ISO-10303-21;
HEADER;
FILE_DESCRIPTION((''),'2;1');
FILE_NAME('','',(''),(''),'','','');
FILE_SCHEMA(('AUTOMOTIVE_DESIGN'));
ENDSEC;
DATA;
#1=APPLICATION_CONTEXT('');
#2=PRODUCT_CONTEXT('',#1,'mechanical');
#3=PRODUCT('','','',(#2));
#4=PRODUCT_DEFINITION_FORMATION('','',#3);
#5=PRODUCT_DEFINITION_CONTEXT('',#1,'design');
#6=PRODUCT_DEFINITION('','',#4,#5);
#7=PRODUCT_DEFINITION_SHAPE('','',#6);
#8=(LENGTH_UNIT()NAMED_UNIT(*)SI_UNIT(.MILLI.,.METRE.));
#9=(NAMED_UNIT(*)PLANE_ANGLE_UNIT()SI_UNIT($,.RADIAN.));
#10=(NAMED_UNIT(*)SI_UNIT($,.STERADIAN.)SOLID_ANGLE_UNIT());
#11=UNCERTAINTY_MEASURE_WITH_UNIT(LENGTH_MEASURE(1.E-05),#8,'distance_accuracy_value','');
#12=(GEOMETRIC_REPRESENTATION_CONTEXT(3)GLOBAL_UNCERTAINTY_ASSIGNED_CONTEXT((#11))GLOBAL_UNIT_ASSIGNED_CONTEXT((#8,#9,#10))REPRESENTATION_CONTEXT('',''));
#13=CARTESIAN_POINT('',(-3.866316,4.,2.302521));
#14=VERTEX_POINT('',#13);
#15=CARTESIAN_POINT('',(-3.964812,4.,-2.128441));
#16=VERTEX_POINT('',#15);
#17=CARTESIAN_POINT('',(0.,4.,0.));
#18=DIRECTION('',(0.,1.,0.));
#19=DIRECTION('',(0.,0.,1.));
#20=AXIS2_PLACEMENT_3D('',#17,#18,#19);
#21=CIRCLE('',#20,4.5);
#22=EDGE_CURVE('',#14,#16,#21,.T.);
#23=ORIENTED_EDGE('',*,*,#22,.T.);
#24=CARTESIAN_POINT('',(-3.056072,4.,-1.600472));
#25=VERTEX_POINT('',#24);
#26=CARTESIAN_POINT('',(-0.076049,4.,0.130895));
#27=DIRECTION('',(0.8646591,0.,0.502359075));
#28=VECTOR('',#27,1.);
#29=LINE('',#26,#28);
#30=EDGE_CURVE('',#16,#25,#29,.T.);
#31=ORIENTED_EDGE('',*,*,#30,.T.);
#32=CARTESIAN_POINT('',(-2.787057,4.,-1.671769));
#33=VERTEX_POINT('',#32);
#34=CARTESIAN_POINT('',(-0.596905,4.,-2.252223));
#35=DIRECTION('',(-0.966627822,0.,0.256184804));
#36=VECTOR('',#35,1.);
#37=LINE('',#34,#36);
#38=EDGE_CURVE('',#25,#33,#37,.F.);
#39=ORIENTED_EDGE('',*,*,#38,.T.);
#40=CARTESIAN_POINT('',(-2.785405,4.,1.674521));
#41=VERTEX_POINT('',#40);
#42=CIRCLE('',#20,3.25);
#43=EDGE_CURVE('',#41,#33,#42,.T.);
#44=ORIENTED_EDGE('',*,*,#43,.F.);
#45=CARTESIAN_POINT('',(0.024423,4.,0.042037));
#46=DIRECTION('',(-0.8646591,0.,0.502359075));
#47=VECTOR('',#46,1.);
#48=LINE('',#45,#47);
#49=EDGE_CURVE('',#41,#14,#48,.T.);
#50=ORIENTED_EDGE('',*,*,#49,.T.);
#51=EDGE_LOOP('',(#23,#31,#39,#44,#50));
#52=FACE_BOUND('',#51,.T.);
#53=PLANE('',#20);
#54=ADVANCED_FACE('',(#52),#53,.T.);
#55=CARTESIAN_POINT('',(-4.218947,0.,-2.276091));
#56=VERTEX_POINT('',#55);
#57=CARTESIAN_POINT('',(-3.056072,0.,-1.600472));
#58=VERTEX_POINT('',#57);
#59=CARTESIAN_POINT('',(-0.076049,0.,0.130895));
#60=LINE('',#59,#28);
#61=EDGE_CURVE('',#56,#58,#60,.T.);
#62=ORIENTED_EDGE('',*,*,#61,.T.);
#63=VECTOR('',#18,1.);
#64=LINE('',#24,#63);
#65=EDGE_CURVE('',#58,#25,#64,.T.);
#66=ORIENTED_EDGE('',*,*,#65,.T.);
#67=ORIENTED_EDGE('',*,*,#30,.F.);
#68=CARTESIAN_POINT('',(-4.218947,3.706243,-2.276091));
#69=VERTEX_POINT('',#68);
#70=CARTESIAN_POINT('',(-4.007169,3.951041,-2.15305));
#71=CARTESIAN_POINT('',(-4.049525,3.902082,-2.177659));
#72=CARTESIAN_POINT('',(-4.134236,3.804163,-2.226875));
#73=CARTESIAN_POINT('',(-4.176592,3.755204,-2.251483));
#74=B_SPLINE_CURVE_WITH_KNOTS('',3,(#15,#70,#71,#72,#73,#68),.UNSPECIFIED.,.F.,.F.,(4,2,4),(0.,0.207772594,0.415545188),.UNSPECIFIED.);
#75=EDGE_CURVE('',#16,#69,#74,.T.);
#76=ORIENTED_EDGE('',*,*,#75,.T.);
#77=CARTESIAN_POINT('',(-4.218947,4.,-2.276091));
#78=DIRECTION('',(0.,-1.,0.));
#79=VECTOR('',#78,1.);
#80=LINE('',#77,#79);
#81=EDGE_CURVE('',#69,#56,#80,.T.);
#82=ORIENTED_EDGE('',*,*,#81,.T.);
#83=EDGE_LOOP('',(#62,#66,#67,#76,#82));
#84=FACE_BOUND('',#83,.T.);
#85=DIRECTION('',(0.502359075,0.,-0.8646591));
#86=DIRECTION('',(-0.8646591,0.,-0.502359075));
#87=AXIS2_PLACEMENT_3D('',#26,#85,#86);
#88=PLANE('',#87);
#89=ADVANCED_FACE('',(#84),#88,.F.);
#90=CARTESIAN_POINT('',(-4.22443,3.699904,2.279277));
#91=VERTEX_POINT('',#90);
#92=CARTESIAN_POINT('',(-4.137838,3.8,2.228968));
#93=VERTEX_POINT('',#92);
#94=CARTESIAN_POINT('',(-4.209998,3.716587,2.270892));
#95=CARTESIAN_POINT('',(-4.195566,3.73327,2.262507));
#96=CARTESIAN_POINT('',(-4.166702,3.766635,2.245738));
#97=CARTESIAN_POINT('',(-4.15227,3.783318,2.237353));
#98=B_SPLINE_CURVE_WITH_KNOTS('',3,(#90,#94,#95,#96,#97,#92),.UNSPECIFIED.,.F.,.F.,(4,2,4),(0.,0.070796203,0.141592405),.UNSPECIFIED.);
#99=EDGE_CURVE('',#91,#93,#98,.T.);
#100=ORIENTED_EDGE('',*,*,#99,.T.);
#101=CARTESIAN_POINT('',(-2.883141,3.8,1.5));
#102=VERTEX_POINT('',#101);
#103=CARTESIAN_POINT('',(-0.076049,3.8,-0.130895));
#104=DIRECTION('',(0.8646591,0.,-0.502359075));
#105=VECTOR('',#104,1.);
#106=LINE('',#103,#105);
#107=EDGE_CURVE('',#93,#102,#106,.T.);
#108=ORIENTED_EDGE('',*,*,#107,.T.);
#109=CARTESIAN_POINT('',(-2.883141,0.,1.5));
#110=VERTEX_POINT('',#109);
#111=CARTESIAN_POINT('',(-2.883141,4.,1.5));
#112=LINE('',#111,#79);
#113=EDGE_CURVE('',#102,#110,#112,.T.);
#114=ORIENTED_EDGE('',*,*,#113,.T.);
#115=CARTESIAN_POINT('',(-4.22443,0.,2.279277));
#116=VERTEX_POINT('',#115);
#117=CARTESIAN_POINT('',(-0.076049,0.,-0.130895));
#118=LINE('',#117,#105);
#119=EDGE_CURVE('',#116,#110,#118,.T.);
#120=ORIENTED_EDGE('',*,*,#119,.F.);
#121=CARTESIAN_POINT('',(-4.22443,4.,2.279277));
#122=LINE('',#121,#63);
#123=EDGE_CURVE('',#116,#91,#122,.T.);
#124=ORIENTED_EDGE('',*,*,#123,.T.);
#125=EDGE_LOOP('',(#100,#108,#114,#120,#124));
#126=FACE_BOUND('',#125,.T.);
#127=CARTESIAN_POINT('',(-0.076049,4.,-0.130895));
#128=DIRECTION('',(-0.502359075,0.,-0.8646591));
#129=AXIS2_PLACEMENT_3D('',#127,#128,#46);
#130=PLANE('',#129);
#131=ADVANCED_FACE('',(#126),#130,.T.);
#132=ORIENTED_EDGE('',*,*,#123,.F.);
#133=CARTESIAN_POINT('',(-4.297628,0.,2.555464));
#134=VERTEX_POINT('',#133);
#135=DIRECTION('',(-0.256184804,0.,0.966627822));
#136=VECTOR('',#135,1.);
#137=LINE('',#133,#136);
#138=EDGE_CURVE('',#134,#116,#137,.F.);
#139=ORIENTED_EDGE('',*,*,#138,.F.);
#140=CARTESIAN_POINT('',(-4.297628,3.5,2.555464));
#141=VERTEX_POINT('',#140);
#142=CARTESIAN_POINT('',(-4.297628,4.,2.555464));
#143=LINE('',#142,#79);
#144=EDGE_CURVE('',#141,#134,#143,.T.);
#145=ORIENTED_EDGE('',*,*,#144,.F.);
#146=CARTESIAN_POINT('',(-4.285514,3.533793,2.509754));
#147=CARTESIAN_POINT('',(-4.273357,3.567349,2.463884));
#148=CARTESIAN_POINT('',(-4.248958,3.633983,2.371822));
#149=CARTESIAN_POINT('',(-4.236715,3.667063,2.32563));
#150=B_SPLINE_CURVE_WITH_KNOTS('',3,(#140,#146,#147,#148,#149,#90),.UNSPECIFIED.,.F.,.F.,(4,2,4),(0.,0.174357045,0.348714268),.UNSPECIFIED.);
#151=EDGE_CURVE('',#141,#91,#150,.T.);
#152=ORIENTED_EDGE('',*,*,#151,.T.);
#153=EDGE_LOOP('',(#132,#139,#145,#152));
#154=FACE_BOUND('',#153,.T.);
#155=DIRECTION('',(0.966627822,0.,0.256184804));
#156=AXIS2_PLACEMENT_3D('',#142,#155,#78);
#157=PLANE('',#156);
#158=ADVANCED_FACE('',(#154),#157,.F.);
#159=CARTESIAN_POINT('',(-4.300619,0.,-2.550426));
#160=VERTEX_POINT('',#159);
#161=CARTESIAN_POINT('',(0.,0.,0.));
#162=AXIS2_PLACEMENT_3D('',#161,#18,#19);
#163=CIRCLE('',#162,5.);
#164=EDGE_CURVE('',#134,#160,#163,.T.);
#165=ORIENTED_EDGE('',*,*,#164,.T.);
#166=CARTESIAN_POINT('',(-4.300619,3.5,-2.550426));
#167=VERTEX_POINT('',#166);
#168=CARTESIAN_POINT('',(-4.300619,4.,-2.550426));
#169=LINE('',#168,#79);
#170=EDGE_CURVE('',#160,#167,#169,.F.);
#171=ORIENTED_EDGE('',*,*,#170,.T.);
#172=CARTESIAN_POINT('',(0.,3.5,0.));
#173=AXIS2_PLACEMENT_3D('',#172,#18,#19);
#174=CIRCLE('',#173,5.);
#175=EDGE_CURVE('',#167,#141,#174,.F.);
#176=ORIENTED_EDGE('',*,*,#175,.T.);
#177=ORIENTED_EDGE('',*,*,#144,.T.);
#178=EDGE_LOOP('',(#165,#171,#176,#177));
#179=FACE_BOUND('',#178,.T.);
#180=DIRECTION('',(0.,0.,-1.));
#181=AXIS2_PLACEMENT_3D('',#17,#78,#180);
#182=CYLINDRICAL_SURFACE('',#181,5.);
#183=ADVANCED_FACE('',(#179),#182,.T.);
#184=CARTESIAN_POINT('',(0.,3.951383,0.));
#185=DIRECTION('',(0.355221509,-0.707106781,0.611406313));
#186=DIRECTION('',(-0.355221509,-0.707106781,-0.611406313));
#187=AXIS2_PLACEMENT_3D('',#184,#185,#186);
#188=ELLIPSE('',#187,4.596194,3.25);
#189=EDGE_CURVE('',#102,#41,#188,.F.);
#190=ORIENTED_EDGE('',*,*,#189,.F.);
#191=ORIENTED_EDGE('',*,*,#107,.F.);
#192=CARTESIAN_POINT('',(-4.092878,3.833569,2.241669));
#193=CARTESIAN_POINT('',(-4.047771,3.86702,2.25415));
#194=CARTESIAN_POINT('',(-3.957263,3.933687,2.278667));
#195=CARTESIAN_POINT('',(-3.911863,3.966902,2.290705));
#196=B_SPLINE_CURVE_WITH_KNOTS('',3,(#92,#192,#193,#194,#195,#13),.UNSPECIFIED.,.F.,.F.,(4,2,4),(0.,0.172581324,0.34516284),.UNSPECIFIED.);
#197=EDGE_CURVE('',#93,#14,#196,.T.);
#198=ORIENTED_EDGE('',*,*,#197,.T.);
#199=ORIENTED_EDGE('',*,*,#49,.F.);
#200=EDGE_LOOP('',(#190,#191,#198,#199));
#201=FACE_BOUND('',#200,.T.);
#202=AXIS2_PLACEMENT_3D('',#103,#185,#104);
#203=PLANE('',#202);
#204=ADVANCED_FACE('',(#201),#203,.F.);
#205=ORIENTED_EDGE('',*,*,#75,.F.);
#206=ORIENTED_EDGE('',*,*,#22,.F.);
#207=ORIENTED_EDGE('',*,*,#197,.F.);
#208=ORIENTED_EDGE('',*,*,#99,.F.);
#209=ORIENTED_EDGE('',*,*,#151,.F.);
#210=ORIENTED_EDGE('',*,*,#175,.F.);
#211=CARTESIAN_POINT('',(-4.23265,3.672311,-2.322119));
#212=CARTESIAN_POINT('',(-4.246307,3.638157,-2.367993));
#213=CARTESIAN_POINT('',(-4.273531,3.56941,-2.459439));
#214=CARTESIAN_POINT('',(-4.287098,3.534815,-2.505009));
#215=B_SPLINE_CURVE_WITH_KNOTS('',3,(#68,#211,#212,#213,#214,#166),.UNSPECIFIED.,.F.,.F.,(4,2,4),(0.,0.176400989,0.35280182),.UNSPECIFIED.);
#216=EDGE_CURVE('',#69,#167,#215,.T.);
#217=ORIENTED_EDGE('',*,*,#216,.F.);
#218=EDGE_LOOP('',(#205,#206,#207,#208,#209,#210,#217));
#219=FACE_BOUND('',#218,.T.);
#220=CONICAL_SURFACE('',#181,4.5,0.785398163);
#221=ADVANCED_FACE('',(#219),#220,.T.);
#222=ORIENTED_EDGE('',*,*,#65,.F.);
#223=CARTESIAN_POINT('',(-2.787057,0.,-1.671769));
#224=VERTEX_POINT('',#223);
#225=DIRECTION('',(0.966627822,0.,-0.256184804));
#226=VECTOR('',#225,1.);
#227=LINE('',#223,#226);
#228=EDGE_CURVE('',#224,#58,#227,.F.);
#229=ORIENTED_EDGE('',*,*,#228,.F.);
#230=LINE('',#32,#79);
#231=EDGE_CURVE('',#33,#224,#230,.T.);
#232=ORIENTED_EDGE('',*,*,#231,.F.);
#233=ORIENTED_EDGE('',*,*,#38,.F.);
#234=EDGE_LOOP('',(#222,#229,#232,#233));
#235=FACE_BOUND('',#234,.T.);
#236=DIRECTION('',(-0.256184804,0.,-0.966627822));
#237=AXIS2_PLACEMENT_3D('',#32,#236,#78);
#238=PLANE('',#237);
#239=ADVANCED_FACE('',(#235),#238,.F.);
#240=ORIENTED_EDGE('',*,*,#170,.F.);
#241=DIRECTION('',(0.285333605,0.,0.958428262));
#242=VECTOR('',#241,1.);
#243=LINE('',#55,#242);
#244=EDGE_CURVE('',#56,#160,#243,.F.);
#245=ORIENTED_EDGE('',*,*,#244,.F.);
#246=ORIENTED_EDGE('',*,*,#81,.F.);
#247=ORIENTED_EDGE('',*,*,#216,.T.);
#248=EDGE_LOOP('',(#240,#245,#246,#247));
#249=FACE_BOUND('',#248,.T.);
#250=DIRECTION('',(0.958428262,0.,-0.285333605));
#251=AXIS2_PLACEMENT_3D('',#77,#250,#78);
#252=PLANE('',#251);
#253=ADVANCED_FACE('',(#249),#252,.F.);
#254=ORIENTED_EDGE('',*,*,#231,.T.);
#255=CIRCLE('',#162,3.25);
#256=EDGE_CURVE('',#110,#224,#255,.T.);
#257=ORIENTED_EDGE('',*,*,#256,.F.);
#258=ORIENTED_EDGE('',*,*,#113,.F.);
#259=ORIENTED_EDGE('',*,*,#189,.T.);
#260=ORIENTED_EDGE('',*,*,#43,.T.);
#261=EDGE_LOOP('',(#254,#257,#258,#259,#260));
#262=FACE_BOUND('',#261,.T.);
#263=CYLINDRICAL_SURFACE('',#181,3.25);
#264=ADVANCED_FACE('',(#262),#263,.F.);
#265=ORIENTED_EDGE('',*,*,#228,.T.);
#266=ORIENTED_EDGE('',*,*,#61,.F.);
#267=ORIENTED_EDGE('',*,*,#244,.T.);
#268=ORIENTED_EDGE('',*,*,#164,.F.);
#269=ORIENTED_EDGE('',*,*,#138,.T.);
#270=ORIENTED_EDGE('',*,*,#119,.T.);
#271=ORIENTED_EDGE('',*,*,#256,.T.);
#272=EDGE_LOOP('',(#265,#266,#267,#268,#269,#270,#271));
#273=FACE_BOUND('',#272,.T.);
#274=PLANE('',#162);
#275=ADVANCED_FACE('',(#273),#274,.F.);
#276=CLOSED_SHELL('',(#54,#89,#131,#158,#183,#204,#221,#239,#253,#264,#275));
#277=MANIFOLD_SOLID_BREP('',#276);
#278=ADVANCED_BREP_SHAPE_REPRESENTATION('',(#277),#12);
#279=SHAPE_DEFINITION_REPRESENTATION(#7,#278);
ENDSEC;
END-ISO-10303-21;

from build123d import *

# Parameters (mm, degrees)
BOSS_EXTRUDE1_DEPTH = 4
CHAMFER1_SIZE       = 0.2
CHAMFER1_SIZE_2     = 0.206341937
CHAMFER2_SIZE       = 0.5


with BuildPart() as part:
    # Sketch1 → Boss-Extrude1 (new body)
    with BuildSketch(Plane(origin=(0, 0, 0), x_dir=(1, 0, 0), z_dir=(0, 1, 0))):
        with BuildLine():
            ThreePointArc((5, 0), (1.227434059, 4.846999652), (-4.397362252, 2.379748983))
            Line((-4.397362252, 2.379748983), (-2.883140649, 1.5))
            ThreePointArc((-2.883140649, 1.5), (0.772105204, 3.156953207), (3.25, 0))
            ThreePointArc((3.25, 0), (0.772105204, -3.156953207), (-2.883140649, -1.5))
            Line((-2.883140649, -1.5), (-4.397362252, -2.379748983))
            ThreePointArc((-4.397362252, -2.379748983), (1.227434059, -4.846999652), (5, 0))
        make_face()
    extrude(amount=BOSS_EXTRUDE1_DEPTH)

    # Chamfer1
    # the kernel refuses this chamfer: 0.206341937, 0.2, 0.191297121 mm, written as the material it takes off along each edge
    with BuildSketch(Plane(origin=(-2.883140649, -0.514336598, -1.5), x_dir=(0.4881882615859918, 0, -0.8727383463843256), z_dir=(0, 1, 0))) as chamfer1_piece_1:
        with BuildLine():
            Line((0.196815803, 0), (CHAMFER1_SIZE * 0.0163116056584, CHAMFER1_SIZE * 0.99986695691))
            Line((CHAMFER1_SIZE * 0.0163116056584, CHAMFER1_SIZE * 0.99986695691), (0, 0))
            ThreePointArc((0, 0), (0.101193556, 0.001489012), (0.196815803, 0))
        make_face()
    extrude(amount=5.028673195, mode=Mode.SUBTRACT)
    with BuildSketch(Plane(origin=(-4.397362252, -0.531068819, -2.379748983), x_dir=(0.4931124519861111, 0, -0.8699655796042999), z_dir=(0, 1, 0))) as chamfer1_piece_2:
        with BuildLine():
            Line((0.196188757, 0), (-CHAMFER1_SIZE_2 * 0.010660935079, -CHAMFER1_SIZE_2 * 0.999943172174))
            Line((-CHAMFER1_SIZE_2 * 0.010660935079, -CHAMFER1_SIZE_2 * 0.999943172174), (0, 0))
            ThreePointArc((0, 0), (0.100953531, 0.000961526), (0.196188757, 0))
        make_face()
    extrude(amount=5.062137639, mode=Mode.SUBTRACT)
    with BuildSketch(Plane(origin=(-4.397362252, -0.520052168, 2.379748983), x_dir=(0.49362201920020077, 0, 0.8696765503109283), z_dir=(0, 1, 0))) as chamfer1_piece_3:
        with BuildLine():
            Line((0.202045895, 0), (-CHAMFER1_SIZE * 0.0100751366451, CHAMFER1_SIZE * 0.999949244523))
            Line((-CHAMFER1_SIZE * 0.0100751366451, CHAMFER1_SIZE * 0.999949244523), (0, 0))
            ThreePointArc((0, 0), (0.103969214, -0.0010198), (0.202045895, 0))
        make_face()
    extrude(amount=5.040104337, mode=Mode.SUBTRACT)
    # the kernel refuses this chamfer: 0.206341937, 0.2, 0.191297121 mm, written as the material it takes off along each edge
    with BuildSketch(Plane(origin=(-2.438414829, 4, 1.241618342), x_dir=(0.502359075260422, 0, 0.8646591001680913), z_dir=(-0.8646591001680914, 0, 0.502359075260422))) as chamfer1_2_piece_1:
        Polygon((CHAMFER1_SIZE, 0), (0, -CHAMFER1_SIZE), (0, 0), align=None)
    extrude(amount=2.57990857, mode=Mode.SUBTRACT)

    # Chamfer2
    # the kernel refuses this chamfer: 0.5 mm, written as the material it takes off along each edge
    with BuildSketch(Plane(origin=(0, 4, 0), x_dir=(-0.9618869269385497, 0, -0.2734475082803154), z_dir=(-0.2734475082803154, 0, 0.9618869269385497))) as chamfer2_piece_1:
        Polygon((5, CHAMFER2_SIZE), (5 - CHAMFER2_SIZE, 0), (5, 0), align=None)
    revolve(axis=Axis((0, 4, 0), (0, -1, 0)), revolution_arc=328.193834559, mode=Mode.SUBTRACT)


solid = part.part
